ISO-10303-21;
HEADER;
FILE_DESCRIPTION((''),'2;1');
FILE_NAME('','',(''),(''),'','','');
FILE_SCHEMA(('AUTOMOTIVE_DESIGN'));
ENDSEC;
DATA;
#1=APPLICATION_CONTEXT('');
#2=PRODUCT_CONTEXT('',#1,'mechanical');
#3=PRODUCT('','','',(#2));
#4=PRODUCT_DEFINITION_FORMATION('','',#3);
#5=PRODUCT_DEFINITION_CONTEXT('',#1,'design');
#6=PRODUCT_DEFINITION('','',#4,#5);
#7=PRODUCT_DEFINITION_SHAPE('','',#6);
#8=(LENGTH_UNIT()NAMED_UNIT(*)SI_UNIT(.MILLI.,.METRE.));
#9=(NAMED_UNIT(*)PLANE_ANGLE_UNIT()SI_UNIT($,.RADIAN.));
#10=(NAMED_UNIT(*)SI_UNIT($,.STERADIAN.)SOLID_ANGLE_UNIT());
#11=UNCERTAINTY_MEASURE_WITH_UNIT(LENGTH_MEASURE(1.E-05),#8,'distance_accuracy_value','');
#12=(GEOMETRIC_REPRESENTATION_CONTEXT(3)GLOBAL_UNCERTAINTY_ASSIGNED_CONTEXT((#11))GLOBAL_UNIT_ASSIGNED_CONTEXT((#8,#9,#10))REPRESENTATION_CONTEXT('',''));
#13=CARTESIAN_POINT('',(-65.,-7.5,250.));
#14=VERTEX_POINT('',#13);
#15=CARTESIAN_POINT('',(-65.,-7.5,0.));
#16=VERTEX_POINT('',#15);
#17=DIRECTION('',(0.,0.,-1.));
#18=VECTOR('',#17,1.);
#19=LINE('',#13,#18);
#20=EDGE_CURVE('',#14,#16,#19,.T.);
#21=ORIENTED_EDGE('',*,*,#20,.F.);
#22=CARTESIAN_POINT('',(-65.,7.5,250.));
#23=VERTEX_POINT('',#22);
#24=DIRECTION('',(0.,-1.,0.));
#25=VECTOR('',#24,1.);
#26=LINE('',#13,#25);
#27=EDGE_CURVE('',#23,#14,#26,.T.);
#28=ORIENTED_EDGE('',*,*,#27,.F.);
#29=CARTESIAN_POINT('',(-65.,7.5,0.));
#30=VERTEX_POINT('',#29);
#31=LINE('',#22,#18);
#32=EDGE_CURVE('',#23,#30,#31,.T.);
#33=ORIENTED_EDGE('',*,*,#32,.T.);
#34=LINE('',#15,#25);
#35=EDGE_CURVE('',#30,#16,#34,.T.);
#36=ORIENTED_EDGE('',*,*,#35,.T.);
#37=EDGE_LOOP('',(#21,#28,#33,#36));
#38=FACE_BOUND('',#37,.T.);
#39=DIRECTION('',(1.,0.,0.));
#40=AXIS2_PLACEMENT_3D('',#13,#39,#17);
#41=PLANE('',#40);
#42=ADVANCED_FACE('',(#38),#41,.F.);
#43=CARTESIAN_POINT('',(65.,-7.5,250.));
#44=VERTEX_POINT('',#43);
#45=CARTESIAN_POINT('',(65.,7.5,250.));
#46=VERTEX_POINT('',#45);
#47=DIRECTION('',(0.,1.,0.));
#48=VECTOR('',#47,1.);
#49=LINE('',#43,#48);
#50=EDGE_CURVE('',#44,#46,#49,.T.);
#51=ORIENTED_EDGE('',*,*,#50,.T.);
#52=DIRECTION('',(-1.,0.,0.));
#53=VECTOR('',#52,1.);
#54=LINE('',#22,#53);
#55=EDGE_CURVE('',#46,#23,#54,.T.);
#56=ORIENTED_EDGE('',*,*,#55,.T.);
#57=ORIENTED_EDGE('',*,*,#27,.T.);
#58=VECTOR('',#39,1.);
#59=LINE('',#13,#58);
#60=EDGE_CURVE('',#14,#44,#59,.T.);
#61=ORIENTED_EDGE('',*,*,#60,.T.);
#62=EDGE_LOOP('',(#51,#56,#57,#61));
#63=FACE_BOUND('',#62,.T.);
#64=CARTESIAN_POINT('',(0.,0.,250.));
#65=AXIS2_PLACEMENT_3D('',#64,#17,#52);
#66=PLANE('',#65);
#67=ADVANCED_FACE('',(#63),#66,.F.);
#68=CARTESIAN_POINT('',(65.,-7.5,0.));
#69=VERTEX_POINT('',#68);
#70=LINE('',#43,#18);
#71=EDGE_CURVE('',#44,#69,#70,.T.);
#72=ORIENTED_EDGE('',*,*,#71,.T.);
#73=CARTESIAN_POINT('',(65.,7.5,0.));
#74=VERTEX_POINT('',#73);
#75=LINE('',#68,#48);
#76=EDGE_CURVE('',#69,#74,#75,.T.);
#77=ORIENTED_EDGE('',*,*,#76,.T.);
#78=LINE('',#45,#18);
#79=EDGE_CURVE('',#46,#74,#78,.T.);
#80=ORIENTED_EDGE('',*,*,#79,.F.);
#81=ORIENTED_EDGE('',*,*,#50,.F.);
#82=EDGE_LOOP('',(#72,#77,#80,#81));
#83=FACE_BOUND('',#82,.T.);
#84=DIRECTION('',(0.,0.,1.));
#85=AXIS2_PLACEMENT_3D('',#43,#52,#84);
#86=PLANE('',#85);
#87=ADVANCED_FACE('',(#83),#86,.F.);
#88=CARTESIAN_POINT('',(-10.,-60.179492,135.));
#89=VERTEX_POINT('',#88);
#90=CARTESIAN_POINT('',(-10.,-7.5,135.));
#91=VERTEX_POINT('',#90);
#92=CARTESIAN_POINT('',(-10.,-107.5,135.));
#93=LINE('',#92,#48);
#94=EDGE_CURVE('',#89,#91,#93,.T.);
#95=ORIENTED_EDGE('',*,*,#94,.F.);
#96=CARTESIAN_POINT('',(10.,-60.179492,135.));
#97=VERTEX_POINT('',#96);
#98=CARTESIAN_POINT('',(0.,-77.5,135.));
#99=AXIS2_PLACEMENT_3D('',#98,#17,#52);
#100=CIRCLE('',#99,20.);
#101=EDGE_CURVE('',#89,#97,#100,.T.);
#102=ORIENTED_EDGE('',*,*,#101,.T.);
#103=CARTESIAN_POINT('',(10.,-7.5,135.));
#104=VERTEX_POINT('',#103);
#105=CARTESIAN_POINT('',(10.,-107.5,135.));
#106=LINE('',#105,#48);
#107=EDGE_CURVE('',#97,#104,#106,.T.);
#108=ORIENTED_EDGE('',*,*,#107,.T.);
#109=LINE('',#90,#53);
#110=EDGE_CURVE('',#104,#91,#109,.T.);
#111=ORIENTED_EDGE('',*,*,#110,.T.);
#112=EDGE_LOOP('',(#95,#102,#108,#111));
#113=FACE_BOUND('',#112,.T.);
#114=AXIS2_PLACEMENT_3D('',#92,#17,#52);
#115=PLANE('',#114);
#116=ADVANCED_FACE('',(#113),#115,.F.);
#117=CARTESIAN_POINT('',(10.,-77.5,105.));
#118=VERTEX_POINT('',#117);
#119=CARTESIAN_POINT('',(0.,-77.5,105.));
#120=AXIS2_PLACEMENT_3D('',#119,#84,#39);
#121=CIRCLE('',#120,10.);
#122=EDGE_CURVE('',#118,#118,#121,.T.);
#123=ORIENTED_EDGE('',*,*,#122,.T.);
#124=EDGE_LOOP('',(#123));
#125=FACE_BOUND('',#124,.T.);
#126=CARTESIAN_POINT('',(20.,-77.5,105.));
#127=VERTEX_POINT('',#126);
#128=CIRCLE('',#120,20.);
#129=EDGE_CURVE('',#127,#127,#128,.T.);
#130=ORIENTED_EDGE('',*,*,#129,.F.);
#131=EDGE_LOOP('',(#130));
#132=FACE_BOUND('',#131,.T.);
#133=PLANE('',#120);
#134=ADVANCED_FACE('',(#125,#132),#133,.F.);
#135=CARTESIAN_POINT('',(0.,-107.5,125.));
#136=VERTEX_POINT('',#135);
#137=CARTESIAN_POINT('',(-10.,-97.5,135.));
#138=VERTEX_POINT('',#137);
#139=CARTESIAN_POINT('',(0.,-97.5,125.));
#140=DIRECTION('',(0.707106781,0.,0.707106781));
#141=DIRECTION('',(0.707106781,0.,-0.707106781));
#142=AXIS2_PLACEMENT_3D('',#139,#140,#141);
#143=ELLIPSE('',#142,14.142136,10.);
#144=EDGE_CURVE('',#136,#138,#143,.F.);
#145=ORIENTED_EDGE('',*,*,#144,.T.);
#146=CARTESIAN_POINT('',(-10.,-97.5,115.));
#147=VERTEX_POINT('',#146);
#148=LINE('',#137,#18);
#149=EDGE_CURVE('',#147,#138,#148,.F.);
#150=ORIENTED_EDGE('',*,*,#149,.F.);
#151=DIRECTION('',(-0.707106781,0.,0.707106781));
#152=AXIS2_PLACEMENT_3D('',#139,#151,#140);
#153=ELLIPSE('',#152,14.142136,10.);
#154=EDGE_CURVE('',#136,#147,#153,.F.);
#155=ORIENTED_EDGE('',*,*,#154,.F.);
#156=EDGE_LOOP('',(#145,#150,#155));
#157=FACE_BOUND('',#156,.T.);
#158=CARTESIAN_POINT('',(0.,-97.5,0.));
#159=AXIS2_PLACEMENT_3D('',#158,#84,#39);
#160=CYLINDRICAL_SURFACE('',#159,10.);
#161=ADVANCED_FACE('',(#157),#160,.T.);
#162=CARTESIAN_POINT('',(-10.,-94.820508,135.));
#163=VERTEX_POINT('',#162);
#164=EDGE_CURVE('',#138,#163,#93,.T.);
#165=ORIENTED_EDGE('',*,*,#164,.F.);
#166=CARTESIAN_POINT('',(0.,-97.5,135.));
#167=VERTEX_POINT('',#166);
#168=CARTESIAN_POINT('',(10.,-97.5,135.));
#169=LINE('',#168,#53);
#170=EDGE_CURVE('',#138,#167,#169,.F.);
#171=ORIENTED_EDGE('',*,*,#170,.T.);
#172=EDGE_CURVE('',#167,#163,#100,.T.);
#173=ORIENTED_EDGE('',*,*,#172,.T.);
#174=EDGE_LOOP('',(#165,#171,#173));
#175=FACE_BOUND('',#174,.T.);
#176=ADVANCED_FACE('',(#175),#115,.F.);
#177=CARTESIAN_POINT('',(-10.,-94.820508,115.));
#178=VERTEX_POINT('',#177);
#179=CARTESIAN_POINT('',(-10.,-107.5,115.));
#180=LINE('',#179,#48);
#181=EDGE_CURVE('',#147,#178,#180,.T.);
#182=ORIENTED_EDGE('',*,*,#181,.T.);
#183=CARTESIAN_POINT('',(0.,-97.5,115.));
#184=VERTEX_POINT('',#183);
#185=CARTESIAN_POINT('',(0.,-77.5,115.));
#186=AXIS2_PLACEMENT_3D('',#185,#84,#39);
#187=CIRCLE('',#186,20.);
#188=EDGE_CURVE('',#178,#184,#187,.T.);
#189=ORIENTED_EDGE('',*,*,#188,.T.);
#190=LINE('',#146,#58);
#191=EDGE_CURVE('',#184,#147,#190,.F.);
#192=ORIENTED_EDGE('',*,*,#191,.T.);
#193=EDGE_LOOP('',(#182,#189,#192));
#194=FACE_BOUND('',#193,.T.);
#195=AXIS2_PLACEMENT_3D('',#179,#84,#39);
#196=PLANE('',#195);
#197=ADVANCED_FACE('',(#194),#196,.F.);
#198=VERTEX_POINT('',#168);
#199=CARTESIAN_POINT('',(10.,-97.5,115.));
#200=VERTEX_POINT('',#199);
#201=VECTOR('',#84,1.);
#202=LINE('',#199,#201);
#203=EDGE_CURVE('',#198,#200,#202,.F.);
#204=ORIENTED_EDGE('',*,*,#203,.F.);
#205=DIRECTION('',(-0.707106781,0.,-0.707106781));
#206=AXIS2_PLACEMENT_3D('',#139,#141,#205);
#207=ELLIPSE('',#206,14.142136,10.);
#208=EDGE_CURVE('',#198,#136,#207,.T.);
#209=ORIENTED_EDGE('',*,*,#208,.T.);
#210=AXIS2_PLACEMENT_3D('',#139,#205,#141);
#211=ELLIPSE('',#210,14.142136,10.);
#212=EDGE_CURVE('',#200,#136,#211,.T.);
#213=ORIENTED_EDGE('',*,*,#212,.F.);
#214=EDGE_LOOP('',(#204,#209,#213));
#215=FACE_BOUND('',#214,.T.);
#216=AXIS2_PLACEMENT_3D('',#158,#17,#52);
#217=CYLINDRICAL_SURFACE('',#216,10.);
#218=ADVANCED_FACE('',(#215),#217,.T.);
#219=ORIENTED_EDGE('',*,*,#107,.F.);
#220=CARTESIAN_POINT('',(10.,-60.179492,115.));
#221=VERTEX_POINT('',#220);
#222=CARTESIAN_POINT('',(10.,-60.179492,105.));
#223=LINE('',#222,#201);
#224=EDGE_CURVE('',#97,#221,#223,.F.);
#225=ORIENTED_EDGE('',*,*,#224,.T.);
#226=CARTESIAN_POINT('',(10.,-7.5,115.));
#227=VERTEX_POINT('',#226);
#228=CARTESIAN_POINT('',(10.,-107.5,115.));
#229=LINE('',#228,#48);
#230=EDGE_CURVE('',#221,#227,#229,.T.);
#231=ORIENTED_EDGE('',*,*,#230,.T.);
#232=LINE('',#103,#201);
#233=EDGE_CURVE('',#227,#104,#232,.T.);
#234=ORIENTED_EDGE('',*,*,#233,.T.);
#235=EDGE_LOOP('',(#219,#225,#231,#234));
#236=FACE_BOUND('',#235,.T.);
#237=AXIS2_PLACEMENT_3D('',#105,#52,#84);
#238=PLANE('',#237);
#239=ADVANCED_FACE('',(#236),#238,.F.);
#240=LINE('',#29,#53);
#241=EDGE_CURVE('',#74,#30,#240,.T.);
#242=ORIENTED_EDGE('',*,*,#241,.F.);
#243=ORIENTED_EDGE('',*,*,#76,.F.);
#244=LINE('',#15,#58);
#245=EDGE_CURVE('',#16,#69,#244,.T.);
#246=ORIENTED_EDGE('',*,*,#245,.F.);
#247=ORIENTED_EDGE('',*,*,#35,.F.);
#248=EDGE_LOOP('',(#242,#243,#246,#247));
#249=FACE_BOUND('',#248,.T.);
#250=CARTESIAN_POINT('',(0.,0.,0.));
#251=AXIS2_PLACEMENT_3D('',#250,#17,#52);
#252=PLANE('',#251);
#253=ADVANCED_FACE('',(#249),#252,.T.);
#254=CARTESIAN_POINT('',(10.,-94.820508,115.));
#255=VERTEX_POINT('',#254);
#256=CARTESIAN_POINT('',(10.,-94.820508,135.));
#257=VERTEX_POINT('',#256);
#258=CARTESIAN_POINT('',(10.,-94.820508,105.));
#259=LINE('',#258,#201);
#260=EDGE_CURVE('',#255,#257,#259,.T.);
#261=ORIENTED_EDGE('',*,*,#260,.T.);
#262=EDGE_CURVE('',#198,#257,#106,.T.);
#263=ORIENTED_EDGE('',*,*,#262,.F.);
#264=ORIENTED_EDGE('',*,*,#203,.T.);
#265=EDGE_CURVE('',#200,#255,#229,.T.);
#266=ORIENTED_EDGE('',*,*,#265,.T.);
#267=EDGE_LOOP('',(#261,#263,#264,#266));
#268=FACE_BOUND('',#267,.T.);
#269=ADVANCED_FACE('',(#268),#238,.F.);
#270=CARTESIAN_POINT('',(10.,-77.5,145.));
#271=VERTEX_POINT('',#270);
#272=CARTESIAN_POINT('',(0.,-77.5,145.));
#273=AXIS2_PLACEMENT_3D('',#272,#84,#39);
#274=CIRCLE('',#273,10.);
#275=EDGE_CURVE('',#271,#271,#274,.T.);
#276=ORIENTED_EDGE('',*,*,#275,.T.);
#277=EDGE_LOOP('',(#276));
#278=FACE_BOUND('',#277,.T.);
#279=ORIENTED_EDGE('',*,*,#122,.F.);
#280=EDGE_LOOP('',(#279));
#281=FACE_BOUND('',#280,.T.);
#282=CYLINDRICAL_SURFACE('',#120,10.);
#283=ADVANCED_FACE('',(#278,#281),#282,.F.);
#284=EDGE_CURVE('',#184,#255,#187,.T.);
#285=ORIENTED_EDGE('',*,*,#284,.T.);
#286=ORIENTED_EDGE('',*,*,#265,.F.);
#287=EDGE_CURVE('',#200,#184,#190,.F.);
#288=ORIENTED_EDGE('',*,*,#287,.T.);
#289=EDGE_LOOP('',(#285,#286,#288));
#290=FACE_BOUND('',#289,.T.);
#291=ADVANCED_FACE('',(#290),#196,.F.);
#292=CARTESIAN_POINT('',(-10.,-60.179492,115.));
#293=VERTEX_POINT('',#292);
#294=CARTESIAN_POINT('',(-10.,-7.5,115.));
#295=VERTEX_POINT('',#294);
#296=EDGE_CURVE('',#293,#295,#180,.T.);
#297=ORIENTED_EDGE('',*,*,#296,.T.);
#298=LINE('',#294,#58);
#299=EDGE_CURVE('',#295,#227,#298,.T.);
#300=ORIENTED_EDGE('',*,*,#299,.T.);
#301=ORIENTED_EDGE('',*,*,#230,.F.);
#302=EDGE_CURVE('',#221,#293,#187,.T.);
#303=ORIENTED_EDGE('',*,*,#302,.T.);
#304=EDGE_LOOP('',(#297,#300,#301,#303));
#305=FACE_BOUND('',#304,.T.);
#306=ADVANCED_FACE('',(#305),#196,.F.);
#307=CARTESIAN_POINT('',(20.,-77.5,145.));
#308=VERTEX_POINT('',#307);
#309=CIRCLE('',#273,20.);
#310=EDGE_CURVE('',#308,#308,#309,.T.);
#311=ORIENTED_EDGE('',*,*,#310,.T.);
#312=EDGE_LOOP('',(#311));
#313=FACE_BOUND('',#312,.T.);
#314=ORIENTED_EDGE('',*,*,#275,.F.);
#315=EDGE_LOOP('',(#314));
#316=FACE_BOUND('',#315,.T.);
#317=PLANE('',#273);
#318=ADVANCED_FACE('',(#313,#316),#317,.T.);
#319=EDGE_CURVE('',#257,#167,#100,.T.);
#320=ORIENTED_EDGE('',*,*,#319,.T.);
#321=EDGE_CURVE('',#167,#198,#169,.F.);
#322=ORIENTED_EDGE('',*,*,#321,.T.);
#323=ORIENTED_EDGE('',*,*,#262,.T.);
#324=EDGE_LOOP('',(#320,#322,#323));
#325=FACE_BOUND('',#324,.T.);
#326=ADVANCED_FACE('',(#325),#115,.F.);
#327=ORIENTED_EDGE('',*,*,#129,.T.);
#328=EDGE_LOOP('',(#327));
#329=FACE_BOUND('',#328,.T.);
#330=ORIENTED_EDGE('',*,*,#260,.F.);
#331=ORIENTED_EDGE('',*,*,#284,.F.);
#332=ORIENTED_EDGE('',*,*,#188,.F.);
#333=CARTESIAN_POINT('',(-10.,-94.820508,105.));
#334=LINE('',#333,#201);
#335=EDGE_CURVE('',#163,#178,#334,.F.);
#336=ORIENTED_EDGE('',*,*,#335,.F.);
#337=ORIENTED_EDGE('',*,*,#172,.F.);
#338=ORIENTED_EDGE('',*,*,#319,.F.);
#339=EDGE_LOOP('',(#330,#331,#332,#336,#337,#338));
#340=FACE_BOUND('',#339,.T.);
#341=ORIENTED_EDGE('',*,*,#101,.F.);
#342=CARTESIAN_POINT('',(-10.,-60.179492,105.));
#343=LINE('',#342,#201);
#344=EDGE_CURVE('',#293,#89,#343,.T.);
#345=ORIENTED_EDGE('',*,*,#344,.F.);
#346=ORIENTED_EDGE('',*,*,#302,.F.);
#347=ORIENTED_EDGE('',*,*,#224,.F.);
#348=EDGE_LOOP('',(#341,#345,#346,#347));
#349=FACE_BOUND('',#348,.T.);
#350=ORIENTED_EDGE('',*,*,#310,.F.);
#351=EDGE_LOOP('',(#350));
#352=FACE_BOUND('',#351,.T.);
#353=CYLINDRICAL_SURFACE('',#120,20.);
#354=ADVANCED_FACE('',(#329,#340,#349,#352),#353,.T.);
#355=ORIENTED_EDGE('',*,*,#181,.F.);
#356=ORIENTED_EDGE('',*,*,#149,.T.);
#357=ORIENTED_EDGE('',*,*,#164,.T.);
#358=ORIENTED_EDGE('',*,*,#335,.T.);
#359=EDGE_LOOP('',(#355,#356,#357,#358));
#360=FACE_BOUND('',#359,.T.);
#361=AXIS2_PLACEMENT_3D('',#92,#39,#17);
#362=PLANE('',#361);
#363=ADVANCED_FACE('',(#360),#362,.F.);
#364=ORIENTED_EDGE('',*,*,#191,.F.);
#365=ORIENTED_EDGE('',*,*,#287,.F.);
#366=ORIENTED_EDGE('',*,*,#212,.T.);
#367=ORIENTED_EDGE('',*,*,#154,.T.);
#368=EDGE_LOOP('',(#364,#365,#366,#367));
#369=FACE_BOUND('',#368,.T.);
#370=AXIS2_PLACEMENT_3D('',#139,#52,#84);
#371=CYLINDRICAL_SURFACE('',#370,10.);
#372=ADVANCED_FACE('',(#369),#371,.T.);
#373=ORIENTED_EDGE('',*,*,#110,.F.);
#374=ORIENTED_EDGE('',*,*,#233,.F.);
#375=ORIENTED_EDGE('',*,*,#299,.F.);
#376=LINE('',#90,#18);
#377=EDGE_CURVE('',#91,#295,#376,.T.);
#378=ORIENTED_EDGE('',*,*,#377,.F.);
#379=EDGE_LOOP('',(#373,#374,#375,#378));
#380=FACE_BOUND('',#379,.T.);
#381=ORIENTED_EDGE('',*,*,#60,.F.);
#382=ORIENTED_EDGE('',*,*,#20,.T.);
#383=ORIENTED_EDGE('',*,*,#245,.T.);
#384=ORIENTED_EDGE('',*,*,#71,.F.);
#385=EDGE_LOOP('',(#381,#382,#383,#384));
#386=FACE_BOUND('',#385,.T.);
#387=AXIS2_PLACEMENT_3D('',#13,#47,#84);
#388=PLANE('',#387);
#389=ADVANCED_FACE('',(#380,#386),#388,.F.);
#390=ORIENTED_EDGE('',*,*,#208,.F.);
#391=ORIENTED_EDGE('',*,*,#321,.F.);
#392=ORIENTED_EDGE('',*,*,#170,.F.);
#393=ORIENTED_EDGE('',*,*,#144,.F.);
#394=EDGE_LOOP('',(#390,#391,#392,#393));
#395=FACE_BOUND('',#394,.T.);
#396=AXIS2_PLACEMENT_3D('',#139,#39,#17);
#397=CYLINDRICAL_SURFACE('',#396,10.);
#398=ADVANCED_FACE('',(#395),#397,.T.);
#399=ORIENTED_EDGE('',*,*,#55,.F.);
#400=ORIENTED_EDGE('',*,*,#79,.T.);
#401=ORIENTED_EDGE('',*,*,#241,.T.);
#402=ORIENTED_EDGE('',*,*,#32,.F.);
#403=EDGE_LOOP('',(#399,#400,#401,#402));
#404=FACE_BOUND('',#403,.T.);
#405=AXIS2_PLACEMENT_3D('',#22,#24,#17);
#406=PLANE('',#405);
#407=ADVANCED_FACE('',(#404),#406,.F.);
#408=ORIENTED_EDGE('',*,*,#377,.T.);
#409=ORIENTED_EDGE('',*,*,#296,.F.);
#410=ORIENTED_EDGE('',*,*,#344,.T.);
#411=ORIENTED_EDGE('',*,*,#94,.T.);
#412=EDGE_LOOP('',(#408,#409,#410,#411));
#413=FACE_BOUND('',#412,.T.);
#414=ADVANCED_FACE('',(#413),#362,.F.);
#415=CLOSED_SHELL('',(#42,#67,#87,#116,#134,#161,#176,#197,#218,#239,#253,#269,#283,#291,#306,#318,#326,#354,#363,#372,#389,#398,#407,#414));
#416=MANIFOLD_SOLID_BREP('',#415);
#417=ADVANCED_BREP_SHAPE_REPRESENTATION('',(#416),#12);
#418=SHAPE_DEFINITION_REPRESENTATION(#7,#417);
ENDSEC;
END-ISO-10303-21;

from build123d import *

# Parameters (mm, degrees)
SKETCH1_W                = 130
SKETCH1_H                = 15
BOSS_EXTRUDE1_DEPTH      = 250
SKETCH2_W                = 20
SKETCH2_H                = 20
BOSS_EXTRUDE3_DEPTH      = 100
BOSS_EXTRUDE4_DEPTH      = 10
BOSS_EXTRUDE4_DEPTH_BACK = 30
SKETCH3_R                = 20
SKETCH3_R_2              = 10
SKETCH4_R                = 10
CUT_EXTRUDE1_DEPTH       = 185.407836059
FILLET1_R                = 10


with BuildPart() as part:
    # Sketch1 → Boss-Extrude1 (new body)
    with BuildSketch(Plane.XY):
        Rectangle(SKETCH1_W, SKETCH1_H)
    extrude(amount=BOSS_EXTRUDE1_DEPTH)

    # Sketch2 → Boss-Extrude3 (add)
    with BuildSketch(Plane.XZ.offset(7.5)):
        with Locations((0, 125)):
            Rectangle(SKETCH2_W, SKETCH2_H)
    extrude(amount=BOSS_EXTRUDE3_DEPTH)

    # Sketch3 → Boss-Extrude4 (add, two sides: drawn at the far end of the back side and taken through both)
    with BuildSketch(Plane.XY.offset(135).offset(-BOSS_EXTRUDE4_DEPTH_BACK)):
        with Locations((0, -77.5)):
            Circle(SKETCH3_R)
        with Locations((0, -77.5)):
            Circle(SKETCH3_R_2, mode=Mode.SUBTRACT)
    extrude(amount=BOSS_EXTRUDE4_DEPTH + BOSS_EXTRUDE4_DEPTH_BACK)

    # Sketch4 → Cut-Extrude1 (cut, through all)
    with BuildSketch(Plane.XY.offset(135)):
        with Locations((0, -77.5)):
            Circle(SKETCH4_R)
    extrude(amount=-CUT_EXTRUDE1_DEPTH, mode=Mode.SUBTRACT)

    # Fillet1
    fillet1_edges = [part.edges().sort_by_distance(p)[0] for p in [
        (10, -107.5, 125),
        (0, -107.5, 135),
        (-10, -107.5, 125),
        (0, -107.5, 115),
    ]]
    fillet(fillet1_edges, radius=FILLET1_R - 0.0001)  # a hair under: the kernel refuses the full size


solid = part.part
